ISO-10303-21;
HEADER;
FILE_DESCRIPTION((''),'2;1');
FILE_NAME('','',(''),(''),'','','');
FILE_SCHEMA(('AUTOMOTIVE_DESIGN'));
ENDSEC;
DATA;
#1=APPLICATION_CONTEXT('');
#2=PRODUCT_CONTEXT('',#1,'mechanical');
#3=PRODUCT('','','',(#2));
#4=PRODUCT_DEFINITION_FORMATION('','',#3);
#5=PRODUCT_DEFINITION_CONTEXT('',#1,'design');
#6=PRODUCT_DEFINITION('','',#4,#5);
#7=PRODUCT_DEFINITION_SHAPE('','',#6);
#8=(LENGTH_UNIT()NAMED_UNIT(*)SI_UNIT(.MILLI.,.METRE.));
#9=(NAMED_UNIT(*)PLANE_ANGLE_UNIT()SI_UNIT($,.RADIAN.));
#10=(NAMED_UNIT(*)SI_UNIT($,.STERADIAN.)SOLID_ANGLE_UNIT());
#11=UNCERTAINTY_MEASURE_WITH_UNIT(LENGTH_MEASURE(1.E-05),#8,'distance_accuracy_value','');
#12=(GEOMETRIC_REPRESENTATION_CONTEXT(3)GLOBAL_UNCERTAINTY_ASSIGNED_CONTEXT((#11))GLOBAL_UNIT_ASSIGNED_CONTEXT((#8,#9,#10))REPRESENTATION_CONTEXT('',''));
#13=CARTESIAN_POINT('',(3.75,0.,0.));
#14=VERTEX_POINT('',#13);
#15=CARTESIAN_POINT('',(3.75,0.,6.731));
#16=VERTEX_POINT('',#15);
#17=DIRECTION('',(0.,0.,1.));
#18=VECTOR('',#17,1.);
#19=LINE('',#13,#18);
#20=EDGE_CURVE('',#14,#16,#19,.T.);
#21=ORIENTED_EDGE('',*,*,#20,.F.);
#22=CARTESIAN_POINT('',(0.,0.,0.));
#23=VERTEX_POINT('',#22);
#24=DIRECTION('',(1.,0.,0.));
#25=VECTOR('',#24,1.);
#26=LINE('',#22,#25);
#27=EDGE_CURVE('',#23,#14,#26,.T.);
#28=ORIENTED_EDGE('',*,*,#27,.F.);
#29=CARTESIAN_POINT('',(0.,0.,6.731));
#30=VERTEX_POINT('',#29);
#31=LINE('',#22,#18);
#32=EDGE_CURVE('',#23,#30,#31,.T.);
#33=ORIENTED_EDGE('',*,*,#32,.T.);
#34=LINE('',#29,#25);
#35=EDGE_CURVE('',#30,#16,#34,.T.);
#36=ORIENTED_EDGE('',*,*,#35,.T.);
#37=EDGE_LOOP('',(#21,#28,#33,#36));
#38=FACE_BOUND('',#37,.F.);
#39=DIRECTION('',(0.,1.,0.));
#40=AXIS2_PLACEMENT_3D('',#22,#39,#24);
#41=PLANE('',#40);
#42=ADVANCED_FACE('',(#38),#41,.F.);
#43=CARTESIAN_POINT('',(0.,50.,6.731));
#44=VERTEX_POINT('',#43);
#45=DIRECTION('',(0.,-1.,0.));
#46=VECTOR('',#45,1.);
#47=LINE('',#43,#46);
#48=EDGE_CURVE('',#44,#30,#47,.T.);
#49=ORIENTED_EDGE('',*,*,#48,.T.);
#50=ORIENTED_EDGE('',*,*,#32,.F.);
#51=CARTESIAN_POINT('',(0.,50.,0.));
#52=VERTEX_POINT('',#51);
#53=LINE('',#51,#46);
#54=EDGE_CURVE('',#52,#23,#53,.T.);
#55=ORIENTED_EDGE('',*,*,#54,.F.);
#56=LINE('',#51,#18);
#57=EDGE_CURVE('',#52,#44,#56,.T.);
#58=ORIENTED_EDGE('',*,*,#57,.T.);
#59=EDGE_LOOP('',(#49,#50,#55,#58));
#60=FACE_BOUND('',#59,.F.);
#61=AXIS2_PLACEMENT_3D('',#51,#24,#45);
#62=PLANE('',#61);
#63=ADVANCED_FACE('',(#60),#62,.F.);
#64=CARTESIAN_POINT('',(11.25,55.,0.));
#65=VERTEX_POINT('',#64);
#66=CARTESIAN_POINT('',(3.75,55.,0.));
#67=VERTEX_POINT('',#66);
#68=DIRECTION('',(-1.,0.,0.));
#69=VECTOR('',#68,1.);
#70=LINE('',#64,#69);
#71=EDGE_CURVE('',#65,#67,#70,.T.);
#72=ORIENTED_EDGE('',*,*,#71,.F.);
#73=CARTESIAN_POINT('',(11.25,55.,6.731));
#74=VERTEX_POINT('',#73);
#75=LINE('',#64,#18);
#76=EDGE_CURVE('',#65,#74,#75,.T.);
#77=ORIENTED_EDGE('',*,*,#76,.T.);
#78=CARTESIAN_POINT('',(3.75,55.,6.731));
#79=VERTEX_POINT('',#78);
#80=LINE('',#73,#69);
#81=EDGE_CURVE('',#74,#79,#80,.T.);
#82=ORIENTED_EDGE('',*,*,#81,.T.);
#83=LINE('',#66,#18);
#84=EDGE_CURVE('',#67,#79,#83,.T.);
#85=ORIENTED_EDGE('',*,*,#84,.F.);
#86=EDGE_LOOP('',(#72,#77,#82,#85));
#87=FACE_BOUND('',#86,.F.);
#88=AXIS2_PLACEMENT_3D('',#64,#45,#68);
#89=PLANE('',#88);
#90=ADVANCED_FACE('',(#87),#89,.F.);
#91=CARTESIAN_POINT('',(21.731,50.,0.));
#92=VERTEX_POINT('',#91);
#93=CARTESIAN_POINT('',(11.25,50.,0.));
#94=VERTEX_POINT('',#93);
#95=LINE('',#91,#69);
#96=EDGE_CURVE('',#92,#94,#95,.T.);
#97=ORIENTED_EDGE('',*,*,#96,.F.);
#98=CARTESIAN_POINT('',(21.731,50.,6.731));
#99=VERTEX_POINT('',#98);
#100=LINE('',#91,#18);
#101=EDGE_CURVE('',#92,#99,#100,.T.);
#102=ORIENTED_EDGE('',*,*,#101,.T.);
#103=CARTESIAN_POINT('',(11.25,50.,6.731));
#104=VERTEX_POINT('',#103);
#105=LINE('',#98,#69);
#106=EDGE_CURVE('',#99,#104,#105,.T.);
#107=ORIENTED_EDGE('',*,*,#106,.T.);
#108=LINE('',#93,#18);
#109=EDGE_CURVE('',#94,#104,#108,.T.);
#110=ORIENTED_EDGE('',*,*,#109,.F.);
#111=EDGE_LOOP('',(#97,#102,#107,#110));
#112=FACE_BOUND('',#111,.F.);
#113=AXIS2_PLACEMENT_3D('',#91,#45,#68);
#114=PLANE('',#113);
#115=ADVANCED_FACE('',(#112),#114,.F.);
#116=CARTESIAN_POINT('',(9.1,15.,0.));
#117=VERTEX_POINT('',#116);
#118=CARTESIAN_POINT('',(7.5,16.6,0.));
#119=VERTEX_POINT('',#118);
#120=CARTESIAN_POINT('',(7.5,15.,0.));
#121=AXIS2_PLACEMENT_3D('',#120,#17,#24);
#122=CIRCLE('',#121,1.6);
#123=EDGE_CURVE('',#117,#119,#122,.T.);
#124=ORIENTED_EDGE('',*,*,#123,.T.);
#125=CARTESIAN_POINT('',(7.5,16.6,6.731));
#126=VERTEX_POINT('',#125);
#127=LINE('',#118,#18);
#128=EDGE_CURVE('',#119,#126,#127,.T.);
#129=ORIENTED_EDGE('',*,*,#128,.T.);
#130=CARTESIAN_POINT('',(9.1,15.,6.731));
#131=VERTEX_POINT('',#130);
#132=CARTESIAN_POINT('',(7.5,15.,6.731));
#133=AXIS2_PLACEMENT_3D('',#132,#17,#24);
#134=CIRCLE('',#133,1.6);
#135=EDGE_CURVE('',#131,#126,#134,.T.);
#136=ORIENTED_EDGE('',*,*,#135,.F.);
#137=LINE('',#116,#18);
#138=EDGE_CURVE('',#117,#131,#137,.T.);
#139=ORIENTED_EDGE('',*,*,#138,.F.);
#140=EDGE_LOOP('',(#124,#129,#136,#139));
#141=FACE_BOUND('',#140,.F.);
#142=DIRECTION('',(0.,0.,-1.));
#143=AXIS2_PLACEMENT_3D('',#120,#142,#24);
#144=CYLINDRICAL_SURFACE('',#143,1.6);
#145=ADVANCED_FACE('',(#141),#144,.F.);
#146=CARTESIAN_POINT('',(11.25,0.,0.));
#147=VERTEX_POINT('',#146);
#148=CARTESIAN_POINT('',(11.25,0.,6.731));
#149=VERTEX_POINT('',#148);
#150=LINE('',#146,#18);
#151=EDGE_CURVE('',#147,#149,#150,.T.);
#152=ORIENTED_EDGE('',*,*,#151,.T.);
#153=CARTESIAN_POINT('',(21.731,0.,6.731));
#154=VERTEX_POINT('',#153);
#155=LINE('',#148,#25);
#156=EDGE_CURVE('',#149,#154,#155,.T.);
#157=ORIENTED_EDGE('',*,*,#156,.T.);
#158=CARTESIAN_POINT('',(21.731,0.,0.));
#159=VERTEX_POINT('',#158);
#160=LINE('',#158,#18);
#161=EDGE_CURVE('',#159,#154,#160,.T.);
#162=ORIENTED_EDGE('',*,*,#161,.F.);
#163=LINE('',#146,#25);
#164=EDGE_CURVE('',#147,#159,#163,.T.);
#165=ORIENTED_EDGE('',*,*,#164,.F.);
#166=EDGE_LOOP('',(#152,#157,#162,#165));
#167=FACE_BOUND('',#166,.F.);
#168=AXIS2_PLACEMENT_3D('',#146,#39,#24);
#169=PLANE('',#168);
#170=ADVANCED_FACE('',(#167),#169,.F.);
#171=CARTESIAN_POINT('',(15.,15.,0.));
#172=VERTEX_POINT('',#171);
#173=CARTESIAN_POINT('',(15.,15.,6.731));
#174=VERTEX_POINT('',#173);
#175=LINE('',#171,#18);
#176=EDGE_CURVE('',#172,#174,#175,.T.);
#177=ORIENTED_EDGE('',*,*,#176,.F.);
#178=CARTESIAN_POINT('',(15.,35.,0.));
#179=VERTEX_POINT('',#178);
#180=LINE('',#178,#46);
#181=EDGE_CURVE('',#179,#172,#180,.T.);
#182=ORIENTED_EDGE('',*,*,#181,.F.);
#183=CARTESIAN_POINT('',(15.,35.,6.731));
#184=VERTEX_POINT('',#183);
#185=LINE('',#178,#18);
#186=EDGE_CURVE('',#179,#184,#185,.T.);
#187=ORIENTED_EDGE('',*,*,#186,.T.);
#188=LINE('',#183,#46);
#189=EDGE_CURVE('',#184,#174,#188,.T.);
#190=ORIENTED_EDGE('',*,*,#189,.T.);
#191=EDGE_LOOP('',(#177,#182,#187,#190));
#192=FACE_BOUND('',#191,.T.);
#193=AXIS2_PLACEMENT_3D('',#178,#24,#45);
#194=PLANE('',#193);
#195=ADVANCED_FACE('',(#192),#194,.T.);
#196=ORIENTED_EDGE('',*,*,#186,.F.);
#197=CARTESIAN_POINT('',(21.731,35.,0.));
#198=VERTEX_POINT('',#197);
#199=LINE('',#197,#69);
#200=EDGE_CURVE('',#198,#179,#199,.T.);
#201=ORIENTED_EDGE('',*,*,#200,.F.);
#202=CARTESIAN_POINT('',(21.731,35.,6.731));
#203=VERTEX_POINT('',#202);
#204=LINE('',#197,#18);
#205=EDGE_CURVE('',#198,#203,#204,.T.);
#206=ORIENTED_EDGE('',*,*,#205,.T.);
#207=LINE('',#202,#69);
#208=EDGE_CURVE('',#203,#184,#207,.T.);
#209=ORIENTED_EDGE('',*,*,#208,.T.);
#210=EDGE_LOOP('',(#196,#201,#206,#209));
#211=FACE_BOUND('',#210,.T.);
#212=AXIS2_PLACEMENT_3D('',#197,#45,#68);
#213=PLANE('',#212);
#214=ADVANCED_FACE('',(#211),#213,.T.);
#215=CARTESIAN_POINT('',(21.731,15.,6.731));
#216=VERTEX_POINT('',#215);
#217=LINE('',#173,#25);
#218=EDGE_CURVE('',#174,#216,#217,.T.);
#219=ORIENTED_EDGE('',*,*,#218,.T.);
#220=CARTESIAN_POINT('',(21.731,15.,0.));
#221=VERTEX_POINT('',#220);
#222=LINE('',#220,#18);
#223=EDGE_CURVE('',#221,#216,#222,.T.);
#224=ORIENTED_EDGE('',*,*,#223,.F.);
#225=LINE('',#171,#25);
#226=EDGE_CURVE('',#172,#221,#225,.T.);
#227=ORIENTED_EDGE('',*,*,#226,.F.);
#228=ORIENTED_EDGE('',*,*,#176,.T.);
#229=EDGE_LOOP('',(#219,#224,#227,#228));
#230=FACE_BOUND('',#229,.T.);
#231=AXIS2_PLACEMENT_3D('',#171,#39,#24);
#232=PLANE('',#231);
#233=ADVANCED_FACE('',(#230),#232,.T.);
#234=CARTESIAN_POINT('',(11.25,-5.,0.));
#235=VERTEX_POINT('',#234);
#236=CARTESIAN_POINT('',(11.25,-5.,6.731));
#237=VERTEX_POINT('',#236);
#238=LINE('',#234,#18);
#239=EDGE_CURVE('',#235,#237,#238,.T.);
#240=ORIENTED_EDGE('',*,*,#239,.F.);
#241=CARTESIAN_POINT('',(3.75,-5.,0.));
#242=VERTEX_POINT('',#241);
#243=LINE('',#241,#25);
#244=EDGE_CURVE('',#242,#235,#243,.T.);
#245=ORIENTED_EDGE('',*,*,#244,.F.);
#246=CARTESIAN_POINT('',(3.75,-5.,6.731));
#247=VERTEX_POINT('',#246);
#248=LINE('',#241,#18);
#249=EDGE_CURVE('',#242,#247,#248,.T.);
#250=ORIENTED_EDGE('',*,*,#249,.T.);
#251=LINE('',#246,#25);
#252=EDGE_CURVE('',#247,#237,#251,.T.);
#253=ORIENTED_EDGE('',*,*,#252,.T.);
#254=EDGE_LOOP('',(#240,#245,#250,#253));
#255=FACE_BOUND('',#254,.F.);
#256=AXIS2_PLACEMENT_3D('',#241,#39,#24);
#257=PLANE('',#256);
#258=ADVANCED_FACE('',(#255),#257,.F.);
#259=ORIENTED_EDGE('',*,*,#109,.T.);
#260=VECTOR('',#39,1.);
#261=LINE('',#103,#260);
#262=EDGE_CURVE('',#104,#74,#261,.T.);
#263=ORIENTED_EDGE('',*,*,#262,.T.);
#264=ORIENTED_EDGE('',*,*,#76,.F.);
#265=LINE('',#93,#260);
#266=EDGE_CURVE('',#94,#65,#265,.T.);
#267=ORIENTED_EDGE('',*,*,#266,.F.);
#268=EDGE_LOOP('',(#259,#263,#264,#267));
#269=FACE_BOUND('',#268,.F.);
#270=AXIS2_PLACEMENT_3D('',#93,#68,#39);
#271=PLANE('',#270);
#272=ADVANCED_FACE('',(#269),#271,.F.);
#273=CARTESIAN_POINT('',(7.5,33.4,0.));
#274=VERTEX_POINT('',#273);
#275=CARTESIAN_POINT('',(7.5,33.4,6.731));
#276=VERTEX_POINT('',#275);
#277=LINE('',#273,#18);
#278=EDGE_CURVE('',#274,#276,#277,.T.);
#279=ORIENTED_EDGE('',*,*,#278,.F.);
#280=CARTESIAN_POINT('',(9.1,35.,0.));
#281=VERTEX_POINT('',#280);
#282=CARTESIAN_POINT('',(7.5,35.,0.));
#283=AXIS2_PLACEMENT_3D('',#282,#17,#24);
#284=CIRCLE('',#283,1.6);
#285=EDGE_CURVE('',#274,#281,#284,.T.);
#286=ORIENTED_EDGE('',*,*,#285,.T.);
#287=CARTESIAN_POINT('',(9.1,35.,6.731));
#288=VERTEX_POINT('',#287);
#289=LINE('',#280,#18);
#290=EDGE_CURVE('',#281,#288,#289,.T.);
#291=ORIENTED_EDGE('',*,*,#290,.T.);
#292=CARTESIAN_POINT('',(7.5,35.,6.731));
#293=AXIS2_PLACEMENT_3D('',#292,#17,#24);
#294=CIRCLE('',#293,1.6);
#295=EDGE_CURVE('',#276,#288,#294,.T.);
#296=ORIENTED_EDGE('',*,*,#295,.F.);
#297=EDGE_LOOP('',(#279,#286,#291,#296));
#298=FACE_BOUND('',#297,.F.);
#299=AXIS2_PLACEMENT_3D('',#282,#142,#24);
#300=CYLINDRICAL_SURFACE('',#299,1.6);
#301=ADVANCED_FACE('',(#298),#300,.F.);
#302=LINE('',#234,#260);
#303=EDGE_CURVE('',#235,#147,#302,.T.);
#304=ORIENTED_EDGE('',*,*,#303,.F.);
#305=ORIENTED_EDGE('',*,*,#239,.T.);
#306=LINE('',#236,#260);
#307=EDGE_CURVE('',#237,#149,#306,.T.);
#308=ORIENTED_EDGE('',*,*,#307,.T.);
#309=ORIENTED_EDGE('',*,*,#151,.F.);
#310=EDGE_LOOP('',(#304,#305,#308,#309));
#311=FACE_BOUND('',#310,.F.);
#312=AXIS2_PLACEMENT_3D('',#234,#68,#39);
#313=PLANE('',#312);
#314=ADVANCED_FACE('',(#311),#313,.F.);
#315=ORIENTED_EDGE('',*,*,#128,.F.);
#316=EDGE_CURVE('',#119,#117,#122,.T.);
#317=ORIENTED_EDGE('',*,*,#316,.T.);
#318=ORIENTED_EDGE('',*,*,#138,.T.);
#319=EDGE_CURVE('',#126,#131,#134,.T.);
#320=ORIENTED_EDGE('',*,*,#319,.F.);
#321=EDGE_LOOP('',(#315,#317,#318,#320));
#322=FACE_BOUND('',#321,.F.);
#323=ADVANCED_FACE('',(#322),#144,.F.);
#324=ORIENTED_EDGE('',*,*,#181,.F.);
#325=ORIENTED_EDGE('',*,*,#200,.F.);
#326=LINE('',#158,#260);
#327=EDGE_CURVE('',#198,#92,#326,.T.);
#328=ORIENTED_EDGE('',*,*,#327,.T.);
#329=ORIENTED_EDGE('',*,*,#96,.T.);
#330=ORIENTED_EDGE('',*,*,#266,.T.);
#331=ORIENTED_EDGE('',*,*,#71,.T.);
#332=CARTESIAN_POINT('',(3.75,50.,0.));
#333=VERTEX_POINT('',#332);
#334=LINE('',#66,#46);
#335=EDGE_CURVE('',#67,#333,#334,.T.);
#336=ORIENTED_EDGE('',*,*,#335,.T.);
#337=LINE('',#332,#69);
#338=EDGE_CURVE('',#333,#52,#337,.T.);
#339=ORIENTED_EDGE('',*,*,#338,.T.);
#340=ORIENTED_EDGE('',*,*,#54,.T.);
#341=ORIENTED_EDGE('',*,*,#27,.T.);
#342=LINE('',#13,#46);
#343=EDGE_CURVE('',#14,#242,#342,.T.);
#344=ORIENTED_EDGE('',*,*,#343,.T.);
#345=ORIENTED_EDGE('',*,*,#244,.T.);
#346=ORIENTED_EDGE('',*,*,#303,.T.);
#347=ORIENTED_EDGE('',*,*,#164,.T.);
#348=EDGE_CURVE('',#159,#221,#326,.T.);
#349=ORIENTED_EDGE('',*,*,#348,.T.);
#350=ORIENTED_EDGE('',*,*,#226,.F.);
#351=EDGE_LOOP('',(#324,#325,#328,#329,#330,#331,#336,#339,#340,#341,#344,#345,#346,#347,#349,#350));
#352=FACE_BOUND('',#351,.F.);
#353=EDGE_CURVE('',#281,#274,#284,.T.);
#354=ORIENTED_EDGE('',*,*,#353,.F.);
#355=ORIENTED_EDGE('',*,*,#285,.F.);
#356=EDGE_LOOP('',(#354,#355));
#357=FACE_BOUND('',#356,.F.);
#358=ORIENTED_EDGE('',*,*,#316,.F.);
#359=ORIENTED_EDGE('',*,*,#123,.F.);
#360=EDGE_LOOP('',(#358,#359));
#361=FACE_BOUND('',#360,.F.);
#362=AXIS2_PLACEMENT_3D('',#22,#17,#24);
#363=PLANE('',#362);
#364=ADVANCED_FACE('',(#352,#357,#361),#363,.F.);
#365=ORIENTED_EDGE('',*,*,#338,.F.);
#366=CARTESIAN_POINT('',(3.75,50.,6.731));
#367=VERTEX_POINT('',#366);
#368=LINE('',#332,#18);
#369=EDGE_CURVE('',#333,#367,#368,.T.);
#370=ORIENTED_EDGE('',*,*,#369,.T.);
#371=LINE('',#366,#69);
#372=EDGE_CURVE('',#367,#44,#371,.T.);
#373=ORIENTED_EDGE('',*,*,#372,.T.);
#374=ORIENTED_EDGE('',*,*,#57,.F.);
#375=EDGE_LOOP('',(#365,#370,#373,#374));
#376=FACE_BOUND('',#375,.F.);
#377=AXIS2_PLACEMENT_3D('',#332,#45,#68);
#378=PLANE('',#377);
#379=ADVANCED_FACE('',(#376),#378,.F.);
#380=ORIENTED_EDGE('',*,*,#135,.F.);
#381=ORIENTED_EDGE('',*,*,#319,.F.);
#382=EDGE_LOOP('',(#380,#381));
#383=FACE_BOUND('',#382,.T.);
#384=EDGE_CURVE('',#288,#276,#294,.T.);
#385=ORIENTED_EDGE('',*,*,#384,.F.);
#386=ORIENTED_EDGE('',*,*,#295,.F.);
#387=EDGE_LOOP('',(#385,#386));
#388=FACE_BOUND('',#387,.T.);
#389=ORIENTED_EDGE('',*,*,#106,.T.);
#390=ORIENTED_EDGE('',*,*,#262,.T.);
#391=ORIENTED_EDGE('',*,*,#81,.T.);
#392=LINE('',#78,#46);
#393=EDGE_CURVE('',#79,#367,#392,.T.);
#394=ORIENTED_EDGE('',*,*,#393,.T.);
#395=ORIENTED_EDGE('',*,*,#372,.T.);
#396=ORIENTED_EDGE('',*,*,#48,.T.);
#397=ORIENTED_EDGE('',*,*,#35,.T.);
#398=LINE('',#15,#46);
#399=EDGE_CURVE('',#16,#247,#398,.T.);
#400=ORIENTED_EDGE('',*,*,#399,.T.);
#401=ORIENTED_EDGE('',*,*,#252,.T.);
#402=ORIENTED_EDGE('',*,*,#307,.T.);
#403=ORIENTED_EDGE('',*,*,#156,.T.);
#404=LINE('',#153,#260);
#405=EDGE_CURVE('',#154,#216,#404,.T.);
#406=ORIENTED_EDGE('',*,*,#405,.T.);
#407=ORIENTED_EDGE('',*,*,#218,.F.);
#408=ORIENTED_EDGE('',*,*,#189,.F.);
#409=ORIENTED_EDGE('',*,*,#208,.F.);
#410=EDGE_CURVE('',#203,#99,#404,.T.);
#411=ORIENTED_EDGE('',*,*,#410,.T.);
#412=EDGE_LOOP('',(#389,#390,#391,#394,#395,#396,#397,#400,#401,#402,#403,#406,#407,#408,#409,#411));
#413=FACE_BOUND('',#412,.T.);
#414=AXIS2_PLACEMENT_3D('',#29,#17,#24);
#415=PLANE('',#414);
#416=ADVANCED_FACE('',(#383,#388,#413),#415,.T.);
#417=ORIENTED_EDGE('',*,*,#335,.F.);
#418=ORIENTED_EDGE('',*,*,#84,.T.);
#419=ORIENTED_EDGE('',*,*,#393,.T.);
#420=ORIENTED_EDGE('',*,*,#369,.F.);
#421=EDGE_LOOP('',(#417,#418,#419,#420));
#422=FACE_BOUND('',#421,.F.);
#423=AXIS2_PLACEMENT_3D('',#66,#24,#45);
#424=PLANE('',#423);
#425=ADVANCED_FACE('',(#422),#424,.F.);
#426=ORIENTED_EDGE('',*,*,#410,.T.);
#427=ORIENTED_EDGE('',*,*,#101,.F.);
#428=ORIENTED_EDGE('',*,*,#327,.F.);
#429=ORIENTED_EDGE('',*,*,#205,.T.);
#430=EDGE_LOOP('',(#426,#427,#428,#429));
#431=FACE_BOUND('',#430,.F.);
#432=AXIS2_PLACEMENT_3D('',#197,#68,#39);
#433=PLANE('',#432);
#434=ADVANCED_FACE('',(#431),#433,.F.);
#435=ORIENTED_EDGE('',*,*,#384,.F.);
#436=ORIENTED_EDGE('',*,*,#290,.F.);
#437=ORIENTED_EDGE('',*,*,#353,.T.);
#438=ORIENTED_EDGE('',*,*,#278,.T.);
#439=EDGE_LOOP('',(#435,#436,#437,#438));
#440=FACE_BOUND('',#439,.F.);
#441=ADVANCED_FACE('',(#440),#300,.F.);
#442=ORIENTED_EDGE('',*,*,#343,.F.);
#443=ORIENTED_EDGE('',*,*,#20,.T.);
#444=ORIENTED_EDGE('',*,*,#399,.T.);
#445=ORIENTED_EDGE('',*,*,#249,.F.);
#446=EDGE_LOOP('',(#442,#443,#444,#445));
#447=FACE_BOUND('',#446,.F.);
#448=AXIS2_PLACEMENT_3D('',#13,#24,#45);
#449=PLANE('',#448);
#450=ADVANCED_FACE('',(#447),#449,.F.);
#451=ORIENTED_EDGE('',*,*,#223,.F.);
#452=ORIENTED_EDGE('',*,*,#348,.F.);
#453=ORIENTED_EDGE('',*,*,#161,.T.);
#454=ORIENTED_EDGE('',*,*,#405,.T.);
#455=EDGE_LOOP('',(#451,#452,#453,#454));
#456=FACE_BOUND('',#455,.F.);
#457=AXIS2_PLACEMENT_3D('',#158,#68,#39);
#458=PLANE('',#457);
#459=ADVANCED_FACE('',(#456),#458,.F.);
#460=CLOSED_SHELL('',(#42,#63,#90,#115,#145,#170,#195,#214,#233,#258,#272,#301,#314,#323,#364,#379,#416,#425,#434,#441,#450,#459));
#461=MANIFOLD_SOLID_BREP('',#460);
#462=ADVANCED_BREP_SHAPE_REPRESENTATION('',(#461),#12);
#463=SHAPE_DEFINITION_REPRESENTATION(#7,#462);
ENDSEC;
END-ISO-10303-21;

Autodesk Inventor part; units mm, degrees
ref_plane "YZ Plane" through (0, 0, 0) normal (1, 0, 0) x (0, 1, 0)
ref_plane "XZ Plane" through (0, 0, 0) normal (0, 1, 0) x (-1, 0, 0)
ref_plane "XY Plane" through (0, 0, 0) normal (0, 0, 1) x (1, 0, 0)
sketch "Sketch1" plane through (0, 0, 0) normal (0, 0, 1) x (1, 0, 0)
  line L0 (0, 0) -> (3.75, 0)
  line L1 (3.75, 0) -> (3.75, -5)
  line L2 (3.75, -5) -> (11.25, -5)
  line L3 (11.25, -5) -> (11.25, 0)
  line L4 (11.25, 0) -> (21.731, 0)
  line L5 (21.731, 0) -> (21.731, 50)
  line L6 (21.731, 50) -> (11.25, 50)
  line L7 (11.25, 50) -> (11.25, 55)
  line L8 (11.25, 55) -> (3.75, 55)
  line L9 (3.75, 55) -> (3.75, 50)
  line L10 (3.75, 50) -> (0, 50)
  line L11 (0, 50) -> (0, 0)
  line L12 (21.731, 35) -> (15, 35)
  line L13 (15, 35) -> (15, 15)
  line L14 (15, 15) -> (21.731, 15)
  line L15 (21.731, 15) -> (21.731, 35)
  circle A0 centre (7.5, 35) radius 1.6
  circle A1 centre (7.5, 15) radius 1.6
  line L16 (7.5, 15) -> (7.5, 35)
  point P0 (21.731, 25)
  point P1 (21.731, 25)
  point P2 (7.5, -5)
  point P3 (7.5, 25)
  point P4 (0, 25)
  dimension "d0" = 50
  dimension "d1" = 3.75
  dimension "d2" = 5
  dimension "d3" = 7.5
  dimension "d4" = 10.481
  dimension "d5" = 6.731
  dimension "d6" = 20
  dimension "d7" = 3.75
  dimension "d10" = 3.2
  dimension "d11" = 20
extrude "Extrusion1" add sketch "Sketch1" along normal blind 6.731 contours L11 L10 L9 L8 L7 L6 L5 L12 L13 L14 L4 L3 L2 L1 L0
equation "\"d4\" = d7 + THICKB"
equation "\"d5\" = THICKB"
equation "\"d7\" = d1"
equation "\"d8\" = THICKB"
equation "\"THICKA\" = 3.175"
equation "\"THICKB\" = 6.731"
equation "\"THICKC\" = 12.7"
equation "\"BALLDIA\" = 12"
equation "\"MAGDIA\" = 9.5"
equation "\"THICKPLY\" = 5"
properties part number "Frame_Lower_Vertical_Plate_A"
